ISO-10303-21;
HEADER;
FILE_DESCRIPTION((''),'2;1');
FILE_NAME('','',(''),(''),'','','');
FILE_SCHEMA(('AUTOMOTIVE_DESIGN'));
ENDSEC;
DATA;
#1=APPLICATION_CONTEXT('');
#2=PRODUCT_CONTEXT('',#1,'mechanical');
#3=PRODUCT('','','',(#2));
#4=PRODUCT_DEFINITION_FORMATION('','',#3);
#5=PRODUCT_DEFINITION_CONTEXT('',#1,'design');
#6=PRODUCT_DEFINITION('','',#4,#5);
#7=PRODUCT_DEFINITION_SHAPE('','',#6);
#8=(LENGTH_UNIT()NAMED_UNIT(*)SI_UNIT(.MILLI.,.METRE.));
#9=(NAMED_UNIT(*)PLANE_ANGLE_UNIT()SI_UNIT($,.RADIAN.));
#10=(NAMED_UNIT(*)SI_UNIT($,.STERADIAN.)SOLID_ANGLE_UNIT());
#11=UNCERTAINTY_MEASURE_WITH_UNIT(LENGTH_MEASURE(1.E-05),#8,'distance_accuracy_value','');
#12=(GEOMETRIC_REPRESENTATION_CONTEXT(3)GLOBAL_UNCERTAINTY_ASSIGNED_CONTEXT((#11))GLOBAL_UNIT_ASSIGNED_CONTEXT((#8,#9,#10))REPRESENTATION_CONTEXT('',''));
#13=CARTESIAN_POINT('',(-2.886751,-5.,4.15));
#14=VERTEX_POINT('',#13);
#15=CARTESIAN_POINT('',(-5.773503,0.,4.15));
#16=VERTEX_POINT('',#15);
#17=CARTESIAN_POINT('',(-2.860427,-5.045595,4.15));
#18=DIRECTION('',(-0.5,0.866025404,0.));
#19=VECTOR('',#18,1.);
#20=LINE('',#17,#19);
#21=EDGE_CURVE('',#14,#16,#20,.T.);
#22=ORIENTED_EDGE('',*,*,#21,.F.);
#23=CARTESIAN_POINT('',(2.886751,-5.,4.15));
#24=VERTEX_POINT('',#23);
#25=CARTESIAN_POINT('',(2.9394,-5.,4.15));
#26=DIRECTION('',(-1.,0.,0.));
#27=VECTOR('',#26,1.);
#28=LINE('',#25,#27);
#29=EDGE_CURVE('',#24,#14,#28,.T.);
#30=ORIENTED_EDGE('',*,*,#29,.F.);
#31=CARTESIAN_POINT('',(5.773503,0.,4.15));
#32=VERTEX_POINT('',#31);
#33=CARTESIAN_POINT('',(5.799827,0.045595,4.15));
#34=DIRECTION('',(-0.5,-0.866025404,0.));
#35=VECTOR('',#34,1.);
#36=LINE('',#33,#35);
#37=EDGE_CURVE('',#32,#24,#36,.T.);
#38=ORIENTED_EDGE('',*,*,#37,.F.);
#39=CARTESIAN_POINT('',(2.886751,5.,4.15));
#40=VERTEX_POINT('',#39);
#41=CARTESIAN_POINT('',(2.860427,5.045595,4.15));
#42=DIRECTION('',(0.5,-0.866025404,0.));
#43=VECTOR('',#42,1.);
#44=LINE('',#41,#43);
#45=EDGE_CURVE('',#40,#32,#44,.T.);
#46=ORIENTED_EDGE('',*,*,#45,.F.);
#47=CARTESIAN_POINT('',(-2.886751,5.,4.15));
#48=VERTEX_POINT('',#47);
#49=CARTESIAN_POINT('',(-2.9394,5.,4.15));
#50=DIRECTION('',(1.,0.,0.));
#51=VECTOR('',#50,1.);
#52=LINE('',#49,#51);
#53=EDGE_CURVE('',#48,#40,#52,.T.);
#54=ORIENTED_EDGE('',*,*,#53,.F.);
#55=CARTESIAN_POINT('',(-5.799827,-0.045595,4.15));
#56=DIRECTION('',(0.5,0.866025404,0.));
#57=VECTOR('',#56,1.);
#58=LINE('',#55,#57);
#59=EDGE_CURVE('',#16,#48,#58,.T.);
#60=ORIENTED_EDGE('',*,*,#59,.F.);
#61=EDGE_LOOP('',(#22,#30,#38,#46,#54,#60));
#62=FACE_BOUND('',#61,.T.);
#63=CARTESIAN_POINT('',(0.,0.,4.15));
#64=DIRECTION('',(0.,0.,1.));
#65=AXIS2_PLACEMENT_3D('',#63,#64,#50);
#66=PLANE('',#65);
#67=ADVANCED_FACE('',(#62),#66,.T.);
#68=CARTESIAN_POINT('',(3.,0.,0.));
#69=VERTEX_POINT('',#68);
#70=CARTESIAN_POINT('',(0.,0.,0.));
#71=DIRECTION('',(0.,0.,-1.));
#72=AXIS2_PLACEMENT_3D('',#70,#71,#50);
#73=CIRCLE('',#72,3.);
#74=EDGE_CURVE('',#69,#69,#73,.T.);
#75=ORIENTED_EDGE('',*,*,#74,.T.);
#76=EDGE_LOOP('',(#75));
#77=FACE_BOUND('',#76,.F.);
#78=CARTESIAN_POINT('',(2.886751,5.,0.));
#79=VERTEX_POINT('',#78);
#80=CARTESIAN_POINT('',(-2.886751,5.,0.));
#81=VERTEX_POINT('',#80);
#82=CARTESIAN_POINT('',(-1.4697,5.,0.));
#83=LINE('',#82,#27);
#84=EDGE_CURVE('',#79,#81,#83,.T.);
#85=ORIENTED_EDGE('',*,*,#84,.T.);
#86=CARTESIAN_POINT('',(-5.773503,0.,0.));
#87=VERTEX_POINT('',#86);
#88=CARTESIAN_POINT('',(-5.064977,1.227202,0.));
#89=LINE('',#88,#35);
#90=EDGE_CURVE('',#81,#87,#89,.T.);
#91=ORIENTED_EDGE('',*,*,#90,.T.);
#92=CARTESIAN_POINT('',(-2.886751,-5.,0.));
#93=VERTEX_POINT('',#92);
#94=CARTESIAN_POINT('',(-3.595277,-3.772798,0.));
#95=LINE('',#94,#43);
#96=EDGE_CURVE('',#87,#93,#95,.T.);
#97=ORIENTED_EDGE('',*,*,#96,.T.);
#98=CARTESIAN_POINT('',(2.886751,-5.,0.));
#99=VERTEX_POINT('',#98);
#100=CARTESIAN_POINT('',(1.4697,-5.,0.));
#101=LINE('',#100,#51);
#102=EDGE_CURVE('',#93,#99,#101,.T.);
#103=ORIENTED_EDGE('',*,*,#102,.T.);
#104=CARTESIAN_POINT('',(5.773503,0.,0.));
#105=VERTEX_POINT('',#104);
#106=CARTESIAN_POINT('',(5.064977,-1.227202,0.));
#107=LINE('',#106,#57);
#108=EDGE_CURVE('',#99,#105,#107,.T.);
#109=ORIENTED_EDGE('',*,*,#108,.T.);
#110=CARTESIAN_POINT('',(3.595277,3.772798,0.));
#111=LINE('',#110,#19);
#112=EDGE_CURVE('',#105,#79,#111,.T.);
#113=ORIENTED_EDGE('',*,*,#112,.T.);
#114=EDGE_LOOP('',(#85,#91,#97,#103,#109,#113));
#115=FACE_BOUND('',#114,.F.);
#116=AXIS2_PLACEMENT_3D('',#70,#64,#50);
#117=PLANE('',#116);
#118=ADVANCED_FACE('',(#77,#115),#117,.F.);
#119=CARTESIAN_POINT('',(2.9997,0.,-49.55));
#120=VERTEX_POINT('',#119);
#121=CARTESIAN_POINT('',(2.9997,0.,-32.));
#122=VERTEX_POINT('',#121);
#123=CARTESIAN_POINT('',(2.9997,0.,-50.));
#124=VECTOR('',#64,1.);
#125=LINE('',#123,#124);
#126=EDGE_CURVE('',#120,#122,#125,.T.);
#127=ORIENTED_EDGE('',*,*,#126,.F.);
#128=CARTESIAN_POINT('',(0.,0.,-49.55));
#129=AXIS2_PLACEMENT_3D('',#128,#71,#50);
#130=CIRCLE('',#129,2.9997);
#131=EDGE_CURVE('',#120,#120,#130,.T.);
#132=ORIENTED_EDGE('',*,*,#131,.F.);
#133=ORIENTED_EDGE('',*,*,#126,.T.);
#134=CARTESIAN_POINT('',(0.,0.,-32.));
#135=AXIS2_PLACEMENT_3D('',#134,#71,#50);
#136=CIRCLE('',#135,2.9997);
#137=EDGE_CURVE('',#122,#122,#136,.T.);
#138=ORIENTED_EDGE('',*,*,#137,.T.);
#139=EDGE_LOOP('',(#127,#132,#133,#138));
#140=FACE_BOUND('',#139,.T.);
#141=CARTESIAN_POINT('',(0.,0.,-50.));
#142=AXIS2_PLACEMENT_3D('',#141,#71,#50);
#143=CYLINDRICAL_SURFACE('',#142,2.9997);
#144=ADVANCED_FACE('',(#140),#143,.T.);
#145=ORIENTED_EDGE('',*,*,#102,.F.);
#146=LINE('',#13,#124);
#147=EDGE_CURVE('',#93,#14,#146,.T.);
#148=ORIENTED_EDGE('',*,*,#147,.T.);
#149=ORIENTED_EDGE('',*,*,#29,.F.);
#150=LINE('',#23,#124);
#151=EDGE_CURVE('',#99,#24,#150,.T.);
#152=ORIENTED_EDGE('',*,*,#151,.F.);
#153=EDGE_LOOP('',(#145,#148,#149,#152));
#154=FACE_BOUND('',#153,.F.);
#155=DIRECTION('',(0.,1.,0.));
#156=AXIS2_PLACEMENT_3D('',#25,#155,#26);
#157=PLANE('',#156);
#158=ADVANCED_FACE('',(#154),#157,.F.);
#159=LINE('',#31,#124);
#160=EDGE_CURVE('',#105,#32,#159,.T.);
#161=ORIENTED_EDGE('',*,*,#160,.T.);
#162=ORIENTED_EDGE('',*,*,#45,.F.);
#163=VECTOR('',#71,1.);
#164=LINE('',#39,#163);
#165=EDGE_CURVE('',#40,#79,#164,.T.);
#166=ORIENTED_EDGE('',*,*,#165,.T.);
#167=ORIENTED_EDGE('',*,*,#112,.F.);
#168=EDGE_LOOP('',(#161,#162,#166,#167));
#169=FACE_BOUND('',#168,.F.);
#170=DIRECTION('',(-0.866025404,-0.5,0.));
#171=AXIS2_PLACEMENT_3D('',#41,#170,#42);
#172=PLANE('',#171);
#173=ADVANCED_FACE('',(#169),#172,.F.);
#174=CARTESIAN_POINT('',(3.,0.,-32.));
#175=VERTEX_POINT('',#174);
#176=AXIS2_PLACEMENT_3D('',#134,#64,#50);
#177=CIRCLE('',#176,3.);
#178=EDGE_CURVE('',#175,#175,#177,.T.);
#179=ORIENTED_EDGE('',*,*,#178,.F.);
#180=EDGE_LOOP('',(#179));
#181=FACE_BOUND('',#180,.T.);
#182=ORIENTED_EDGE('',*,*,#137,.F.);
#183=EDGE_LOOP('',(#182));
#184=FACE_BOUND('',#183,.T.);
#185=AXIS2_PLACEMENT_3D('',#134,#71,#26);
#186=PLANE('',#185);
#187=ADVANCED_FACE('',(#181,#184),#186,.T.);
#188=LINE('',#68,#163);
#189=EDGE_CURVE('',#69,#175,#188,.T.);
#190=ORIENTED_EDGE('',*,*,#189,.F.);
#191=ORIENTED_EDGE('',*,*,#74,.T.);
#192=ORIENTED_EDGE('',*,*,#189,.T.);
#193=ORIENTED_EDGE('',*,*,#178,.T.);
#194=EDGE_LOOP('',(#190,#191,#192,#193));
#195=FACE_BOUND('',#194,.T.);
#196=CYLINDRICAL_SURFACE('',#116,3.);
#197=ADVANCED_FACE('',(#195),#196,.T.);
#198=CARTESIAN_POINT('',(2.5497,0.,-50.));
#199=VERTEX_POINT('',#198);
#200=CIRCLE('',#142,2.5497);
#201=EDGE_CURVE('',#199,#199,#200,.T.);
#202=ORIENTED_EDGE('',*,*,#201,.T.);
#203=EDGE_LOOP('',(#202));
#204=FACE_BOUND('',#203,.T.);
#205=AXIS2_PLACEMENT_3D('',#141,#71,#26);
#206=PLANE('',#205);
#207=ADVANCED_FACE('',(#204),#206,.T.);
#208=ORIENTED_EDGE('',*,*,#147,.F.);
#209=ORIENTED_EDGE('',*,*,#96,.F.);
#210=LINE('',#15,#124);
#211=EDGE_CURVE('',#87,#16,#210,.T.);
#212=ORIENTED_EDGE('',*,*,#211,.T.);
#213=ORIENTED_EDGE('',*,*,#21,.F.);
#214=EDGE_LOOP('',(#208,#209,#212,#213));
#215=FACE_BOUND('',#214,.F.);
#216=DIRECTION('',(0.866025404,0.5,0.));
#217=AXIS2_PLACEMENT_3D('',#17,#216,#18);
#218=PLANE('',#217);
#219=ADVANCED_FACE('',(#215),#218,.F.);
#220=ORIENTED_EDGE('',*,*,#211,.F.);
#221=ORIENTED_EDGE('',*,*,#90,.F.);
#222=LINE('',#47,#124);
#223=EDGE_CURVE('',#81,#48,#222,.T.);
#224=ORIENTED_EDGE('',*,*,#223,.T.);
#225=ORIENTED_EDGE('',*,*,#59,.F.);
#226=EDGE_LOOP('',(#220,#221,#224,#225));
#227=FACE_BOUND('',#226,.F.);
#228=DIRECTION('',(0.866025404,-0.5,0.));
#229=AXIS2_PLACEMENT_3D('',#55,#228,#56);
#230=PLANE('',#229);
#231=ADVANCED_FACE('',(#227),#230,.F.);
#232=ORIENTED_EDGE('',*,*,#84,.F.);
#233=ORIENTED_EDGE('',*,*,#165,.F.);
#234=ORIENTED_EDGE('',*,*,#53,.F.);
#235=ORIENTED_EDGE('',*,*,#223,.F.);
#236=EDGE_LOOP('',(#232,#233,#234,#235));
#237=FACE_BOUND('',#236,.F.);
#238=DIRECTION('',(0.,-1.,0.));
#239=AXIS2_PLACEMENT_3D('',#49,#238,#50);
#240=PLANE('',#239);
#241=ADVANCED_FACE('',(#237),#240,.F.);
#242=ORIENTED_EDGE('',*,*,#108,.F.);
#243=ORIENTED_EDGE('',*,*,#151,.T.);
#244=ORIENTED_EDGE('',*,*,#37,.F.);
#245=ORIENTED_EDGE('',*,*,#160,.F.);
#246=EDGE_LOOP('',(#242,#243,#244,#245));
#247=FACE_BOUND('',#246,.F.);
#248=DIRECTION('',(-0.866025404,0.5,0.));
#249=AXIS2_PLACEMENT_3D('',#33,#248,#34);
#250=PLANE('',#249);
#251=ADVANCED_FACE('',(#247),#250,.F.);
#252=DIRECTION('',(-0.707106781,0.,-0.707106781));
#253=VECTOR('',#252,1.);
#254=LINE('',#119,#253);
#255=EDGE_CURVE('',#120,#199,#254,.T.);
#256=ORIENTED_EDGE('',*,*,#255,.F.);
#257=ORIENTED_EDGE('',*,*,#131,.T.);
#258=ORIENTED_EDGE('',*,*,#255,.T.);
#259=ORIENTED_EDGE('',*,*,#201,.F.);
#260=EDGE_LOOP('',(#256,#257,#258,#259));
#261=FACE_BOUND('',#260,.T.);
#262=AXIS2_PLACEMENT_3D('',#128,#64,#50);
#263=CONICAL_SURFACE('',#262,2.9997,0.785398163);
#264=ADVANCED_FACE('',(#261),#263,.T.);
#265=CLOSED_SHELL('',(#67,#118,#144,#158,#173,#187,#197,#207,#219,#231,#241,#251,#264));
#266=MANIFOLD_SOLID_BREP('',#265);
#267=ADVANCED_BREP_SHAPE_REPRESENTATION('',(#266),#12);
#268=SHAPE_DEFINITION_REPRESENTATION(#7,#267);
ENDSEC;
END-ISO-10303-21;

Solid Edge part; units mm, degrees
sketch "Sketch1" plane through (0, 0, 0) normal (0, 0, 1) x (1, 0, 0)
  circle A0 centre (0, 0) radius 5.8
  dimension "D1" = 11.6
extrude "Protrusion1" add sketch "Sketch1" along normal blind 4.15
sketch "Sketch2" plane through (0, 0, 0) normal (0, 0, -1) x (1, 0, 0)
  circle A0 centre (0, 0) radius 3
extrude "Protrusion2" add sketch "Sketch2" along normal blind 50
sketch "Sketch3" plane through (0, 0, -50) normal (0, 0, -1) x (1, 0, 0)
  circle A0 centre (0, 0) radius 2.9997
extrude "Cutout1" cut sketch "Sketch3" against normal blind 18 flip side to cut
chamfer "Chamfer_1" distance 0.45 angle 45 1 edges at (-2.9997, 0, -50)
sketch "Sketch4" plane through (0, 0, 4.15) normal (0, 0, 1) x (1, 0, 0)
  line L0 (-2.9394, 5) -> (2.9394, 5)
  dimension "D1" = 10
extrude "Cutout2" cut sketch "Sketch4" against normal up to next material side at (0, 5.05, 4.15)
pattern_circular "Pattern1" count 6 over 360 about axis through (0, 0, 4.15) along (0, 0, 1) of "Cutout2"
properties part number "24104498"
